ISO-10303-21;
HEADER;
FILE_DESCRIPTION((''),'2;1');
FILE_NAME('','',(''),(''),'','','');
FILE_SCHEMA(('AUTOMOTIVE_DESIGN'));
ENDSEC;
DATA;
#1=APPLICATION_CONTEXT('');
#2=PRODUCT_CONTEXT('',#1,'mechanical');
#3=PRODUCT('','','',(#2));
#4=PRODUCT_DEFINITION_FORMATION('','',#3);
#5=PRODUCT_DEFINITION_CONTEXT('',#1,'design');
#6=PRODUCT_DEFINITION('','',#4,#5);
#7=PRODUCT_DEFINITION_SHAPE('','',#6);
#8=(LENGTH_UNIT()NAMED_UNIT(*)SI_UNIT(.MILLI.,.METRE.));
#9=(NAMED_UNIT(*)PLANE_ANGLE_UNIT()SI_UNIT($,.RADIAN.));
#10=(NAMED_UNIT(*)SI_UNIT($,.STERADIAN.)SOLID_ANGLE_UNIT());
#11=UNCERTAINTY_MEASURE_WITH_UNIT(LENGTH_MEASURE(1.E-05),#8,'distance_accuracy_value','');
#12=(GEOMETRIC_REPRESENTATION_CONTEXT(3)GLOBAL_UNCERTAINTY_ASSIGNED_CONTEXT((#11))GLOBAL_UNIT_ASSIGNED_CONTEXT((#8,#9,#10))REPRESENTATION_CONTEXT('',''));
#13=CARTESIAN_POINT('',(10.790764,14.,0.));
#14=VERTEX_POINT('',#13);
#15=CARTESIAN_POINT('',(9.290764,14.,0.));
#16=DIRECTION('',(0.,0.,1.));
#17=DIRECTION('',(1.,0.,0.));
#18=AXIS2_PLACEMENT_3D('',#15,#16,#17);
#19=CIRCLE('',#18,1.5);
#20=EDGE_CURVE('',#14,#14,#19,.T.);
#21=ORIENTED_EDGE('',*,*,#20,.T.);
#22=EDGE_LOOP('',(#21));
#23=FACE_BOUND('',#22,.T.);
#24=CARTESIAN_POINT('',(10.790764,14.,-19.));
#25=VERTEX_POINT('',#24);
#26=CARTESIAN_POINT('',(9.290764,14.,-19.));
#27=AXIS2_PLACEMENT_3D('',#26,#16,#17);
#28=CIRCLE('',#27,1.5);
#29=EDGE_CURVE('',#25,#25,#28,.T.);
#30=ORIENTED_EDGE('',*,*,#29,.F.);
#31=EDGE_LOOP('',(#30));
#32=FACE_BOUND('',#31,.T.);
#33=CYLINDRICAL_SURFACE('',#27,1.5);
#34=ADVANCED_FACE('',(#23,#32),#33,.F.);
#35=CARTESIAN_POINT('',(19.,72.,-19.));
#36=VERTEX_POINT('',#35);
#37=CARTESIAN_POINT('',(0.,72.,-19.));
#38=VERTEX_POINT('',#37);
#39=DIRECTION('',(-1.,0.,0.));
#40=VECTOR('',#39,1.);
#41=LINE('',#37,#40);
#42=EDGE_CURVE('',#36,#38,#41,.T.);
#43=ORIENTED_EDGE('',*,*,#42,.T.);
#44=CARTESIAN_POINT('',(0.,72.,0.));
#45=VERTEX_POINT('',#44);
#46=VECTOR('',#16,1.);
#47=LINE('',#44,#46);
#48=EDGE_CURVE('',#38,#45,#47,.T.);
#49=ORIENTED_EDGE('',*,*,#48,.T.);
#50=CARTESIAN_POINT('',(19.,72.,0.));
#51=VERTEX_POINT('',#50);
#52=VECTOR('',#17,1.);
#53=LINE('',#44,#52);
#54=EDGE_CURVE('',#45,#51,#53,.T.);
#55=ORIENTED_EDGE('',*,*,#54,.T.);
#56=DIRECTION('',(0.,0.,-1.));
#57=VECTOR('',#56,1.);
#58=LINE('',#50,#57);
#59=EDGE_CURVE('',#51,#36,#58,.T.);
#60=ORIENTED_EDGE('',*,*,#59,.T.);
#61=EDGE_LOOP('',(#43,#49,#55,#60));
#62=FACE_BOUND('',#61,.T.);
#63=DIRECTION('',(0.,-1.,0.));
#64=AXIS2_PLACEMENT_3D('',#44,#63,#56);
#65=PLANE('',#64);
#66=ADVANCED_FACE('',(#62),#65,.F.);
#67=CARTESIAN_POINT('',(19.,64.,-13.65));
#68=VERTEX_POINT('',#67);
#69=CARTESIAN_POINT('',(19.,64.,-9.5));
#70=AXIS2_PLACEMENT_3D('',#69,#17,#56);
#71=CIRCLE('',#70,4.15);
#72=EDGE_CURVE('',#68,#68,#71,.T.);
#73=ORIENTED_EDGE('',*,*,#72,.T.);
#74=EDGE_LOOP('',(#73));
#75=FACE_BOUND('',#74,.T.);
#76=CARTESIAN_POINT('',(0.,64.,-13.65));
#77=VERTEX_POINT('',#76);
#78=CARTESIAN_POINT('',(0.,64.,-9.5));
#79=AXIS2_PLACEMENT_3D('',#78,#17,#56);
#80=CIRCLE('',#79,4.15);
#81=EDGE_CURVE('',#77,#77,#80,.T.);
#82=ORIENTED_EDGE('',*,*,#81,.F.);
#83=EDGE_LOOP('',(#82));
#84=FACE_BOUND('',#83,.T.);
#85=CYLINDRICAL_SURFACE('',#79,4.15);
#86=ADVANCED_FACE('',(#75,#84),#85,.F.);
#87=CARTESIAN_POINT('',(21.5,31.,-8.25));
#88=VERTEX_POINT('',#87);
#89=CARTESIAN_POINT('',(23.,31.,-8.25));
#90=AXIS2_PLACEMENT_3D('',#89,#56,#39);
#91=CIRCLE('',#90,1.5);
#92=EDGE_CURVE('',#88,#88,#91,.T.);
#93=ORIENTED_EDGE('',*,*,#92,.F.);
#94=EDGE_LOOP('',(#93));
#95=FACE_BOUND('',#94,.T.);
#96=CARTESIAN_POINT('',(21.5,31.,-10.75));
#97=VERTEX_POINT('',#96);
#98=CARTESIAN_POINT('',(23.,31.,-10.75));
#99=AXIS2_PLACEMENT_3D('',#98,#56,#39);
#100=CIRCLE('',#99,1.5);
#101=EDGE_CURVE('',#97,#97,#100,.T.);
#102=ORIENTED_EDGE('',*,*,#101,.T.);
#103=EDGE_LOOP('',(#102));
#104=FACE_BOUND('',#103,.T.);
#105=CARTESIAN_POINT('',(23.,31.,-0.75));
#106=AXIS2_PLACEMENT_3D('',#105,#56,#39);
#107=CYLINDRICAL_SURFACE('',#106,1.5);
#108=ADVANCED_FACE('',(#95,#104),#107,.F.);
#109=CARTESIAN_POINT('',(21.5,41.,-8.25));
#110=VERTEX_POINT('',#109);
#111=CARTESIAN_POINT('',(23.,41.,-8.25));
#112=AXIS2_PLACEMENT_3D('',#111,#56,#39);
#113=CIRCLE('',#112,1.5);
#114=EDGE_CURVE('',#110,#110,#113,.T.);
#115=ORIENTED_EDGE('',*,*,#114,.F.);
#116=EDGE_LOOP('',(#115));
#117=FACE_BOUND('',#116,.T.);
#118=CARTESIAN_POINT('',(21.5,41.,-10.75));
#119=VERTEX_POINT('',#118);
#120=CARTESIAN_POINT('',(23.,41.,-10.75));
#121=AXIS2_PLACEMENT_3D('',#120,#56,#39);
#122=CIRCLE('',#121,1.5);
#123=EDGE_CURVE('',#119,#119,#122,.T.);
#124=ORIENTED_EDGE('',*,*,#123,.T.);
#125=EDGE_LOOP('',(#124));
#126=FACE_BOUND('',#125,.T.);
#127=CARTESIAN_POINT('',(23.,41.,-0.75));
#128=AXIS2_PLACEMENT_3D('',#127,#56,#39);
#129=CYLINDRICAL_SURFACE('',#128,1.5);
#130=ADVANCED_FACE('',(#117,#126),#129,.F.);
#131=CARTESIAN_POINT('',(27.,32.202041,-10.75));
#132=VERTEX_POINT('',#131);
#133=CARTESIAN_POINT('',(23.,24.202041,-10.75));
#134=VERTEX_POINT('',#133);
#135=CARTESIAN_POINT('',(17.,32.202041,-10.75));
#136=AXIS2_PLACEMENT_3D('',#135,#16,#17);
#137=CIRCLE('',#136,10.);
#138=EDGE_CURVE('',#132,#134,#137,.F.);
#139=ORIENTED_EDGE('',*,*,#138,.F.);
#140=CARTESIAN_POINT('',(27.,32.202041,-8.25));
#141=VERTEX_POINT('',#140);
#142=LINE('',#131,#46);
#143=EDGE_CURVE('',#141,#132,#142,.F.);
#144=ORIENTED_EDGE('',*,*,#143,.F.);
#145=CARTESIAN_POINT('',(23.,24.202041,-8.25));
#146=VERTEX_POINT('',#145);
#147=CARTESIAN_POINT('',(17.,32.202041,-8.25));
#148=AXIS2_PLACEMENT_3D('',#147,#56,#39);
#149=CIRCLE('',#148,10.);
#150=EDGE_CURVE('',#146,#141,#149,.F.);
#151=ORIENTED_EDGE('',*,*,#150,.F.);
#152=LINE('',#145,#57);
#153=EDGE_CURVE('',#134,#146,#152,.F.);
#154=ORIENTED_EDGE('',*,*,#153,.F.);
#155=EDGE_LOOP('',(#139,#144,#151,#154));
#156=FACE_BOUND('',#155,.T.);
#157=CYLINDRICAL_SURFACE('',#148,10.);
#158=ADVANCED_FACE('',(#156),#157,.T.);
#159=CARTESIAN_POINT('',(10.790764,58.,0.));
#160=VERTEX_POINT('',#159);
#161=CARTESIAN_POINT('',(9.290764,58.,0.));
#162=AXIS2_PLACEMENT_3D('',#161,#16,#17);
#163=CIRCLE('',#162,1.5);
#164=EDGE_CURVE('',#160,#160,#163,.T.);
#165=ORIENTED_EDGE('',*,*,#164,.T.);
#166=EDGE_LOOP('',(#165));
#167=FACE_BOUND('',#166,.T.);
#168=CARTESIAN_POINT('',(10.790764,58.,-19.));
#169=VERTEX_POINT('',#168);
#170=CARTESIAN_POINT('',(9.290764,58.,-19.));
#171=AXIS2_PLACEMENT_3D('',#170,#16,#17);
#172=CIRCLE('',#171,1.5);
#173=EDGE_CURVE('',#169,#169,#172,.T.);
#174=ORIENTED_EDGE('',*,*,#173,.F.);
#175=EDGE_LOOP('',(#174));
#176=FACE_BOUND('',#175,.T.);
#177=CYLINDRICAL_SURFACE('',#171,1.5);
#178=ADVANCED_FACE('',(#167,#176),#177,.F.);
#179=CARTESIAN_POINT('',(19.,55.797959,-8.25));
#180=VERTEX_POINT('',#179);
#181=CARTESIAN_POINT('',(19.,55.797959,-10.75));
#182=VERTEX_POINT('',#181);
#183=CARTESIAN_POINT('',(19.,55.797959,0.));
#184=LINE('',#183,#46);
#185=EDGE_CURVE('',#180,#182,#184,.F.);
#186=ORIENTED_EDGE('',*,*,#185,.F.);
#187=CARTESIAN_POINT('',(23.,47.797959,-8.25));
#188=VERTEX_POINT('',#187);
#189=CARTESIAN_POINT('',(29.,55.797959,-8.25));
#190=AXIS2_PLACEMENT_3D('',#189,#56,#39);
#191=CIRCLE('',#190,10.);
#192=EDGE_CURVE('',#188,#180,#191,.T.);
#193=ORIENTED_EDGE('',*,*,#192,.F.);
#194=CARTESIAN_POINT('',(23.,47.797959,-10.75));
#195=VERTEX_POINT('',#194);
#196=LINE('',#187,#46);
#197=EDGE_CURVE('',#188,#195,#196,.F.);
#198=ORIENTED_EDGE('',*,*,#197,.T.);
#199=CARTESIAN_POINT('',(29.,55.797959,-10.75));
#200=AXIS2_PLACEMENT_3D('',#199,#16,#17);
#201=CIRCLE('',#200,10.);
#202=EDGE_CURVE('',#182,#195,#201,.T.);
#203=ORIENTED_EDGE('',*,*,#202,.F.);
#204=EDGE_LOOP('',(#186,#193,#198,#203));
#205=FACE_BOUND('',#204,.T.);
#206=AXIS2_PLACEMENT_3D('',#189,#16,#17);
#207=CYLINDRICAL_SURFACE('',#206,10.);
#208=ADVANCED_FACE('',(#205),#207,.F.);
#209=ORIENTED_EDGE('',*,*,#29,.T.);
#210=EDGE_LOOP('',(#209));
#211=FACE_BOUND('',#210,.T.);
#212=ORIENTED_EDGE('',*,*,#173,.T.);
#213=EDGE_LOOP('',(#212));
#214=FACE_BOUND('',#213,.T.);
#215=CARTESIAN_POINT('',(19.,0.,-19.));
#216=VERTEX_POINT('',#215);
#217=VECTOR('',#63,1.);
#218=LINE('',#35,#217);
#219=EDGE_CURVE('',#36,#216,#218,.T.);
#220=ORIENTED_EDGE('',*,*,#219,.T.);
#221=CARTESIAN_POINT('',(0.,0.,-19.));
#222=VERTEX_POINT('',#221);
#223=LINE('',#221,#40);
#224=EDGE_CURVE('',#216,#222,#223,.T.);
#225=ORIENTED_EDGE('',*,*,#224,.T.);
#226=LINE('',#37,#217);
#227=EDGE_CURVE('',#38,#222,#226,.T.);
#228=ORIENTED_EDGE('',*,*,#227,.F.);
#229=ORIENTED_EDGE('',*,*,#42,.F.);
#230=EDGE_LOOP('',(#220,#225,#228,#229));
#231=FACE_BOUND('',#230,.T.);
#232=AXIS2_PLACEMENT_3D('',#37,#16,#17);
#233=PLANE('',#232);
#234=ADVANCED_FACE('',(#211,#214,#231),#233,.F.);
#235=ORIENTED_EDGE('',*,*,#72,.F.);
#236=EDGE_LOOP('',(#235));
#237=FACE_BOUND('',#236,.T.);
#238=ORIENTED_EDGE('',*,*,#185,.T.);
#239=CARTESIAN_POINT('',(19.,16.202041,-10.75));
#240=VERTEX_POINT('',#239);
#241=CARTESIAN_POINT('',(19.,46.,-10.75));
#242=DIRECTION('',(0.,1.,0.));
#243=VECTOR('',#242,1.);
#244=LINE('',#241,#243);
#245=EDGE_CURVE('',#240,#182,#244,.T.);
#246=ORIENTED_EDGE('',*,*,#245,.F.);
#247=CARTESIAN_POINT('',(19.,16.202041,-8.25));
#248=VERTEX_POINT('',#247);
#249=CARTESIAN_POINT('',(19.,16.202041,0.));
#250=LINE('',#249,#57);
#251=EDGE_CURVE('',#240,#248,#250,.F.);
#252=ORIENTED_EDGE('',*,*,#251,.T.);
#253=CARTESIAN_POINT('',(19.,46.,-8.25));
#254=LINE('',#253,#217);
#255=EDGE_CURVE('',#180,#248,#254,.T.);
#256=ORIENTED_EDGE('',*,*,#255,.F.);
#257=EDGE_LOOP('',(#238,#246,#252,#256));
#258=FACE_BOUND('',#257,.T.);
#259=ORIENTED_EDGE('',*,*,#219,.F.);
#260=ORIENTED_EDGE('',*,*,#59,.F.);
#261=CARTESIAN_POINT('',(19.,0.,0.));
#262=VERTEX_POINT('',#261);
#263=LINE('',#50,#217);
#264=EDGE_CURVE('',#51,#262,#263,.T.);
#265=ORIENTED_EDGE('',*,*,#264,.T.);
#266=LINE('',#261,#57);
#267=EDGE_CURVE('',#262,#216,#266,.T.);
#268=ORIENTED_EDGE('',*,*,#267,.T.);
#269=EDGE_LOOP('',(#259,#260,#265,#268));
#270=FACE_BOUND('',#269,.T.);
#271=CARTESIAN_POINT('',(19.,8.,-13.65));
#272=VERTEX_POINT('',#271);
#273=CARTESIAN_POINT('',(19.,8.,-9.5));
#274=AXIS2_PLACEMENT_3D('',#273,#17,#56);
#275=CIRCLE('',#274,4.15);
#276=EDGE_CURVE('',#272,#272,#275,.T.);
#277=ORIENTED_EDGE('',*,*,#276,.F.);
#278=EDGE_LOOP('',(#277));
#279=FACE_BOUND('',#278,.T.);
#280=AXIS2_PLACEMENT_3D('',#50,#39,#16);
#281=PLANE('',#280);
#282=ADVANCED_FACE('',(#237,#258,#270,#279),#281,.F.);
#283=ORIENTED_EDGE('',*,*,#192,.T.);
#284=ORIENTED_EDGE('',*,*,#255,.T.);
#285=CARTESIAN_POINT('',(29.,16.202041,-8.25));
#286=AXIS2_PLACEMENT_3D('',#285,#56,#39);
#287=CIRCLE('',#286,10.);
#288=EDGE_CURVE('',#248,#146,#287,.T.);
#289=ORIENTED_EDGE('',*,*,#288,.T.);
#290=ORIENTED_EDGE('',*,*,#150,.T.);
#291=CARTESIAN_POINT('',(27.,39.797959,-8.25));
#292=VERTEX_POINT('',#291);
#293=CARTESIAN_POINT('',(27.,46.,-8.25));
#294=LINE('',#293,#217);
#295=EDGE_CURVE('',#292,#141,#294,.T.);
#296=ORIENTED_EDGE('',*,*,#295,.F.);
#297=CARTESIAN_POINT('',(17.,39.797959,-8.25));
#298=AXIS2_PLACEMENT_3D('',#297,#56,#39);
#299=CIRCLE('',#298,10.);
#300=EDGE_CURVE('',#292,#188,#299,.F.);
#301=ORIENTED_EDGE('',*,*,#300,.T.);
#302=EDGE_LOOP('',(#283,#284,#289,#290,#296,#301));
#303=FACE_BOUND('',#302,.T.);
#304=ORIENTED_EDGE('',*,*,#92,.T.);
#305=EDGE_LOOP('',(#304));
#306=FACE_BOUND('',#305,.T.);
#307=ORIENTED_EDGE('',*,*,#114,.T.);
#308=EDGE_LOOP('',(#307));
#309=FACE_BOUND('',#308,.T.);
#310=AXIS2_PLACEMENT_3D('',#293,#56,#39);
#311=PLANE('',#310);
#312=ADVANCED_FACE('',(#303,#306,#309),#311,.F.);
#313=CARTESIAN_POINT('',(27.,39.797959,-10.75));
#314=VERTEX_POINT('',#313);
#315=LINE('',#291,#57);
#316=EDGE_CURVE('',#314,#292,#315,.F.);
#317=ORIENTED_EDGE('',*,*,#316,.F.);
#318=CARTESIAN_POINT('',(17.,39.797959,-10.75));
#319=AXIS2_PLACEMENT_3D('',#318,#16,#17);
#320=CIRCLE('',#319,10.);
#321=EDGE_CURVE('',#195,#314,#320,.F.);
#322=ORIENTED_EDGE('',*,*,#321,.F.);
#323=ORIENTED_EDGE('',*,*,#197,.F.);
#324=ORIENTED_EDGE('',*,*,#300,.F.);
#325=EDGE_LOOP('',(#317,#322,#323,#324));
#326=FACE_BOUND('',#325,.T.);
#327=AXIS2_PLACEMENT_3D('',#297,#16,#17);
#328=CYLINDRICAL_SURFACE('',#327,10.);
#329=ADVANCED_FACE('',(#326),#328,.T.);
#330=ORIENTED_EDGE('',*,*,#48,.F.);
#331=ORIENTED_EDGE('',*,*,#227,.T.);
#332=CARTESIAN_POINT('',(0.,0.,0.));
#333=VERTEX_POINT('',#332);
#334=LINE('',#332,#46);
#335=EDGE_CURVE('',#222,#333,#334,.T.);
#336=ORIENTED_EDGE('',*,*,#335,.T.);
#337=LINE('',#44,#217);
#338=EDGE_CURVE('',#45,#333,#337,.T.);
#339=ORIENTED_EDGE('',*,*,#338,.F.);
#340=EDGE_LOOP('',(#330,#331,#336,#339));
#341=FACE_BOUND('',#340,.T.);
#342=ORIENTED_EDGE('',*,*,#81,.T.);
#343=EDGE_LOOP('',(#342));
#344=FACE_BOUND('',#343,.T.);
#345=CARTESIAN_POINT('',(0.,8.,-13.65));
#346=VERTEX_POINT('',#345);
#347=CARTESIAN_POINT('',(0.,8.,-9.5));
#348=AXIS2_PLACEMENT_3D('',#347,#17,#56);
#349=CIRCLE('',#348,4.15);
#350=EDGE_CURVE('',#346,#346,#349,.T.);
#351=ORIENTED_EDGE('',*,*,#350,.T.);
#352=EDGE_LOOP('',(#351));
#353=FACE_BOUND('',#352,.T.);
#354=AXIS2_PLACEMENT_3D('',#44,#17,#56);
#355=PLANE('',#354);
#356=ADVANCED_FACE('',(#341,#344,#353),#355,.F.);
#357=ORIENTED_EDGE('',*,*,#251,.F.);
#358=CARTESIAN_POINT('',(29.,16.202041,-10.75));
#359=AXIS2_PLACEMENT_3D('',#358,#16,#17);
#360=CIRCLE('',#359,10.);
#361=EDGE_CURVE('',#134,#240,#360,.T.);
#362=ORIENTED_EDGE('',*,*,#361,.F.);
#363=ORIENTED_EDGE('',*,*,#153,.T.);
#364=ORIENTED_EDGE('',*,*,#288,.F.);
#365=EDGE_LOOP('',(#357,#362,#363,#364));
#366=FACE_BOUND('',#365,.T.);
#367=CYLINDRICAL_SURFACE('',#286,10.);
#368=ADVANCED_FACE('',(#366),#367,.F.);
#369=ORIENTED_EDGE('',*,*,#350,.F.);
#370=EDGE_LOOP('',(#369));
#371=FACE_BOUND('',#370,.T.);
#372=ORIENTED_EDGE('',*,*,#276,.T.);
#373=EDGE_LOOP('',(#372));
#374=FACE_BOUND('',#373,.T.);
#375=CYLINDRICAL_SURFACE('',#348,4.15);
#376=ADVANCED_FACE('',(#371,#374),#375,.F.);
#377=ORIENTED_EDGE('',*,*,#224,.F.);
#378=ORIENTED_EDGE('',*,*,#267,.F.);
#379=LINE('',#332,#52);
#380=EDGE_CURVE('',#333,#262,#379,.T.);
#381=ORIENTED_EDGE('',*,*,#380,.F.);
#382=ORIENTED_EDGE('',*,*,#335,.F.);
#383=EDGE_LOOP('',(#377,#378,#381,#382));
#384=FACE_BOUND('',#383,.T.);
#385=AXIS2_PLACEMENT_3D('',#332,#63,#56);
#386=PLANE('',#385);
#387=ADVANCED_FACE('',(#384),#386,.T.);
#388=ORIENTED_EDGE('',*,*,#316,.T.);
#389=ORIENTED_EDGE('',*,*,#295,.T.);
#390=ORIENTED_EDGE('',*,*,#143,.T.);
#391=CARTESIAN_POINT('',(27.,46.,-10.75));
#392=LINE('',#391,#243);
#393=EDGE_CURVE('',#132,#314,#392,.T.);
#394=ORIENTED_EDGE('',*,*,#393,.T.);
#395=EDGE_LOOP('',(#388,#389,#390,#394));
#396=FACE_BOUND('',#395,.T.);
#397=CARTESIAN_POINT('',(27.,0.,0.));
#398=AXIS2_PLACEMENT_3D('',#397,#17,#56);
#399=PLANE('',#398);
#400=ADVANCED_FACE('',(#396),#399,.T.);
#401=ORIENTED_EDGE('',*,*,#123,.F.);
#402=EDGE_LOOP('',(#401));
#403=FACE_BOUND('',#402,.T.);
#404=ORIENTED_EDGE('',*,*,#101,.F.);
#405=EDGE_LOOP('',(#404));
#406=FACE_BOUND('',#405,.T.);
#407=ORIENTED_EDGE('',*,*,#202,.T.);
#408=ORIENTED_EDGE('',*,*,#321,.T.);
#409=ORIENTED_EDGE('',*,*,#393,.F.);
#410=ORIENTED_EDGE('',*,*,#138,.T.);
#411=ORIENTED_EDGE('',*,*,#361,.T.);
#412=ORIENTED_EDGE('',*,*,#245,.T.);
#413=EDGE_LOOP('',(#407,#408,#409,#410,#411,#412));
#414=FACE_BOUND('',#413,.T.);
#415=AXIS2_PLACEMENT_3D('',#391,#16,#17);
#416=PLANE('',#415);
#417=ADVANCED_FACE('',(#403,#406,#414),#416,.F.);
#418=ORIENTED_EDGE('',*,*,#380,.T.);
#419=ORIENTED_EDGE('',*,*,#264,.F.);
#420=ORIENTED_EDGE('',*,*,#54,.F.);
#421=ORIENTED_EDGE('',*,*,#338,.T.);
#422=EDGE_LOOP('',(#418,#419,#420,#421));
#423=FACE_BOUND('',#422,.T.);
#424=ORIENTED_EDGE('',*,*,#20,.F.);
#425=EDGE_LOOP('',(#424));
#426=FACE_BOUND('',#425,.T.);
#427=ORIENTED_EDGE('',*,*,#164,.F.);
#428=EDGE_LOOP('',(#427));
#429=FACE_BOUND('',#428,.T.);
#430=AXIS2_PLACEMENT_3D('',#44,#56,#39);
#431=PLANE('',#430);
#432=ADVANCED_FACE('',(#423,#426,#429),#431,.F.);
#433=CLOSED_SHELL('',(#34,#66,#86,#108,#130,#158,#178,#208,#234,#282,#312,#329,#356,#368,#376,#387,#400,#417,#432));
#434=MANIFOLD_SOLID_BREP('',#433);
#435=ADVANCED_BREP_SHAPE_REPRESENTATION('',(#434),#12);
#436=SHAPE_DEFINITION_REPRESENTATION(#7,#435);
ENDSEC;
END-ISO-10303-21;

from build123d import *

# Parameters (mm, degrees)
SKETCH1_W           = 19
SKETCH1_H           = 19
BOSS_EXTRUDE1_DEPTH = 72
SKETCH2_R           = 4.15
CUT_EXTRUDE1_DEPTH  = 77.850504227
SKETCH3_R           = 1.5
CUT_EXTRUDE2_DEPTH  = 77.850504227
SKETCH4_W           = 2.5
SKETCH4_H           = 20
BOSS_EXTRUDE2_DEPTH = 8
FILLET1_R           = 10
FILLET2_R           = 10
SKETCH5_R           = 1.5
CUT_EXTRUDE3_DEPTH  = 10


with BuildPart() as part:
    # Sketch1 → Boss-Extrude1 (new body)
    with BuildSketch(Plane(origin=(0, 0, 0), x_dir=(1, 0, 0), z_dir=(0, 1, 0))):
        with Locations((9.5, 9.5)):
            Rectangle(SKETCH1_W, SKETCH1_H)
    extrude(amount=BOSS_EXTRUDE1_DEPTH)

    # Sketch2 → Cut-Extrude1 (cut, through all)
    with BuildSketch(Plane(origin=(19, 0, 0), x_dir=(0, 0, -1), z_dir=(1, 0, 0))):
        with Locations((9.5, 64)):
            Circle(SKETCH2_R)
        with Locations((9.5, 8)):
            Circle(SKETCH2_R)
    extrude(amount=-CUT_EXTRUDE1_DEPTH, mode=Mode.SUBTRACT)

    # Sketch3 → Cut-Extrude2 (cut, through all)
    with BuildSketch(Plane.XY):
        with Locations((9.290763855, 58)):
            Circle(SKETCH3_R)
        with Locations((9.290763855, 14)):
            Circle(SKETCH3_R)
    extrude(amount=-CUT_EXTRUDE2_DEPTH, mode=Mode.SUBTRACT)

    # Sketch4 → Boss-Extrude2 (add)
    with BuildSketch(Plane(origin=(19, 0, 0), x_dir=(0, 0, -1), z_dir=(1, 0, 0))):
        with Locations((9.5, 36)):
            Rectangle(SKETCH4_W, SKETCH4_H)
    extrude(amount=BOSS_EXTRUDE2_DEPTH)

    # Fillet1
    # the kernel refuses this fillet: 10 mm, written as the material it adds along each edge
    with BuildSketch(Plane(origin=(19, 46, -8.25), x_dir=(0, 1, 0), z_dir=(0, 0, -1)), Plane(origin=(19, 26, -10.75), x_dir=(0, -1, 0), z_dir=(0, 0, 1))) as fillet1_piece_1:
        with BuildLine():
            CenterArc((9.797958971, 10), FILLET1_R, 191.536959033, 78.463040967)
            Line((0, 8), (-0.195959179, 7.96))
            ThreePointArc((-0.195959179, 7.96), (-0.2, 4), (-0.2, 0))
            Line((-0.2, 0), (0, -0.2))
            Line((0, -0.2), (9.797958971, -0.2))
            Line((9.797958971, -0.2), (9.797958971, 0))
        make_face()
    extrude(amount=2.5)

    # Fillet2
    fillet2_edges = [part.edges().sort_by_distance(p)[0] for p in [
        (27, 46, -9.5),
        (27, 26, -9.5),
    ]]
    fillet(fillet2_edges, radius=FILLET2_R)

    # Sketch5 → Cut-Extrude3 (cut)
    with BuildSketch(Plane(origin=(0, 0, -10.75), x_dir=(-1, 0, 0), z_dir=(0, 0, -1))):
        with Locations((-23, 41)):
            Circle(SKETCH5_R)
        with Locations((-23, 31)):
            Circle(SKETCH5_R)
    extrude(amount=-CUT_EXTRUDE3_DEPTH, mode=Mode.SUBTRACT)


solid = part.part
